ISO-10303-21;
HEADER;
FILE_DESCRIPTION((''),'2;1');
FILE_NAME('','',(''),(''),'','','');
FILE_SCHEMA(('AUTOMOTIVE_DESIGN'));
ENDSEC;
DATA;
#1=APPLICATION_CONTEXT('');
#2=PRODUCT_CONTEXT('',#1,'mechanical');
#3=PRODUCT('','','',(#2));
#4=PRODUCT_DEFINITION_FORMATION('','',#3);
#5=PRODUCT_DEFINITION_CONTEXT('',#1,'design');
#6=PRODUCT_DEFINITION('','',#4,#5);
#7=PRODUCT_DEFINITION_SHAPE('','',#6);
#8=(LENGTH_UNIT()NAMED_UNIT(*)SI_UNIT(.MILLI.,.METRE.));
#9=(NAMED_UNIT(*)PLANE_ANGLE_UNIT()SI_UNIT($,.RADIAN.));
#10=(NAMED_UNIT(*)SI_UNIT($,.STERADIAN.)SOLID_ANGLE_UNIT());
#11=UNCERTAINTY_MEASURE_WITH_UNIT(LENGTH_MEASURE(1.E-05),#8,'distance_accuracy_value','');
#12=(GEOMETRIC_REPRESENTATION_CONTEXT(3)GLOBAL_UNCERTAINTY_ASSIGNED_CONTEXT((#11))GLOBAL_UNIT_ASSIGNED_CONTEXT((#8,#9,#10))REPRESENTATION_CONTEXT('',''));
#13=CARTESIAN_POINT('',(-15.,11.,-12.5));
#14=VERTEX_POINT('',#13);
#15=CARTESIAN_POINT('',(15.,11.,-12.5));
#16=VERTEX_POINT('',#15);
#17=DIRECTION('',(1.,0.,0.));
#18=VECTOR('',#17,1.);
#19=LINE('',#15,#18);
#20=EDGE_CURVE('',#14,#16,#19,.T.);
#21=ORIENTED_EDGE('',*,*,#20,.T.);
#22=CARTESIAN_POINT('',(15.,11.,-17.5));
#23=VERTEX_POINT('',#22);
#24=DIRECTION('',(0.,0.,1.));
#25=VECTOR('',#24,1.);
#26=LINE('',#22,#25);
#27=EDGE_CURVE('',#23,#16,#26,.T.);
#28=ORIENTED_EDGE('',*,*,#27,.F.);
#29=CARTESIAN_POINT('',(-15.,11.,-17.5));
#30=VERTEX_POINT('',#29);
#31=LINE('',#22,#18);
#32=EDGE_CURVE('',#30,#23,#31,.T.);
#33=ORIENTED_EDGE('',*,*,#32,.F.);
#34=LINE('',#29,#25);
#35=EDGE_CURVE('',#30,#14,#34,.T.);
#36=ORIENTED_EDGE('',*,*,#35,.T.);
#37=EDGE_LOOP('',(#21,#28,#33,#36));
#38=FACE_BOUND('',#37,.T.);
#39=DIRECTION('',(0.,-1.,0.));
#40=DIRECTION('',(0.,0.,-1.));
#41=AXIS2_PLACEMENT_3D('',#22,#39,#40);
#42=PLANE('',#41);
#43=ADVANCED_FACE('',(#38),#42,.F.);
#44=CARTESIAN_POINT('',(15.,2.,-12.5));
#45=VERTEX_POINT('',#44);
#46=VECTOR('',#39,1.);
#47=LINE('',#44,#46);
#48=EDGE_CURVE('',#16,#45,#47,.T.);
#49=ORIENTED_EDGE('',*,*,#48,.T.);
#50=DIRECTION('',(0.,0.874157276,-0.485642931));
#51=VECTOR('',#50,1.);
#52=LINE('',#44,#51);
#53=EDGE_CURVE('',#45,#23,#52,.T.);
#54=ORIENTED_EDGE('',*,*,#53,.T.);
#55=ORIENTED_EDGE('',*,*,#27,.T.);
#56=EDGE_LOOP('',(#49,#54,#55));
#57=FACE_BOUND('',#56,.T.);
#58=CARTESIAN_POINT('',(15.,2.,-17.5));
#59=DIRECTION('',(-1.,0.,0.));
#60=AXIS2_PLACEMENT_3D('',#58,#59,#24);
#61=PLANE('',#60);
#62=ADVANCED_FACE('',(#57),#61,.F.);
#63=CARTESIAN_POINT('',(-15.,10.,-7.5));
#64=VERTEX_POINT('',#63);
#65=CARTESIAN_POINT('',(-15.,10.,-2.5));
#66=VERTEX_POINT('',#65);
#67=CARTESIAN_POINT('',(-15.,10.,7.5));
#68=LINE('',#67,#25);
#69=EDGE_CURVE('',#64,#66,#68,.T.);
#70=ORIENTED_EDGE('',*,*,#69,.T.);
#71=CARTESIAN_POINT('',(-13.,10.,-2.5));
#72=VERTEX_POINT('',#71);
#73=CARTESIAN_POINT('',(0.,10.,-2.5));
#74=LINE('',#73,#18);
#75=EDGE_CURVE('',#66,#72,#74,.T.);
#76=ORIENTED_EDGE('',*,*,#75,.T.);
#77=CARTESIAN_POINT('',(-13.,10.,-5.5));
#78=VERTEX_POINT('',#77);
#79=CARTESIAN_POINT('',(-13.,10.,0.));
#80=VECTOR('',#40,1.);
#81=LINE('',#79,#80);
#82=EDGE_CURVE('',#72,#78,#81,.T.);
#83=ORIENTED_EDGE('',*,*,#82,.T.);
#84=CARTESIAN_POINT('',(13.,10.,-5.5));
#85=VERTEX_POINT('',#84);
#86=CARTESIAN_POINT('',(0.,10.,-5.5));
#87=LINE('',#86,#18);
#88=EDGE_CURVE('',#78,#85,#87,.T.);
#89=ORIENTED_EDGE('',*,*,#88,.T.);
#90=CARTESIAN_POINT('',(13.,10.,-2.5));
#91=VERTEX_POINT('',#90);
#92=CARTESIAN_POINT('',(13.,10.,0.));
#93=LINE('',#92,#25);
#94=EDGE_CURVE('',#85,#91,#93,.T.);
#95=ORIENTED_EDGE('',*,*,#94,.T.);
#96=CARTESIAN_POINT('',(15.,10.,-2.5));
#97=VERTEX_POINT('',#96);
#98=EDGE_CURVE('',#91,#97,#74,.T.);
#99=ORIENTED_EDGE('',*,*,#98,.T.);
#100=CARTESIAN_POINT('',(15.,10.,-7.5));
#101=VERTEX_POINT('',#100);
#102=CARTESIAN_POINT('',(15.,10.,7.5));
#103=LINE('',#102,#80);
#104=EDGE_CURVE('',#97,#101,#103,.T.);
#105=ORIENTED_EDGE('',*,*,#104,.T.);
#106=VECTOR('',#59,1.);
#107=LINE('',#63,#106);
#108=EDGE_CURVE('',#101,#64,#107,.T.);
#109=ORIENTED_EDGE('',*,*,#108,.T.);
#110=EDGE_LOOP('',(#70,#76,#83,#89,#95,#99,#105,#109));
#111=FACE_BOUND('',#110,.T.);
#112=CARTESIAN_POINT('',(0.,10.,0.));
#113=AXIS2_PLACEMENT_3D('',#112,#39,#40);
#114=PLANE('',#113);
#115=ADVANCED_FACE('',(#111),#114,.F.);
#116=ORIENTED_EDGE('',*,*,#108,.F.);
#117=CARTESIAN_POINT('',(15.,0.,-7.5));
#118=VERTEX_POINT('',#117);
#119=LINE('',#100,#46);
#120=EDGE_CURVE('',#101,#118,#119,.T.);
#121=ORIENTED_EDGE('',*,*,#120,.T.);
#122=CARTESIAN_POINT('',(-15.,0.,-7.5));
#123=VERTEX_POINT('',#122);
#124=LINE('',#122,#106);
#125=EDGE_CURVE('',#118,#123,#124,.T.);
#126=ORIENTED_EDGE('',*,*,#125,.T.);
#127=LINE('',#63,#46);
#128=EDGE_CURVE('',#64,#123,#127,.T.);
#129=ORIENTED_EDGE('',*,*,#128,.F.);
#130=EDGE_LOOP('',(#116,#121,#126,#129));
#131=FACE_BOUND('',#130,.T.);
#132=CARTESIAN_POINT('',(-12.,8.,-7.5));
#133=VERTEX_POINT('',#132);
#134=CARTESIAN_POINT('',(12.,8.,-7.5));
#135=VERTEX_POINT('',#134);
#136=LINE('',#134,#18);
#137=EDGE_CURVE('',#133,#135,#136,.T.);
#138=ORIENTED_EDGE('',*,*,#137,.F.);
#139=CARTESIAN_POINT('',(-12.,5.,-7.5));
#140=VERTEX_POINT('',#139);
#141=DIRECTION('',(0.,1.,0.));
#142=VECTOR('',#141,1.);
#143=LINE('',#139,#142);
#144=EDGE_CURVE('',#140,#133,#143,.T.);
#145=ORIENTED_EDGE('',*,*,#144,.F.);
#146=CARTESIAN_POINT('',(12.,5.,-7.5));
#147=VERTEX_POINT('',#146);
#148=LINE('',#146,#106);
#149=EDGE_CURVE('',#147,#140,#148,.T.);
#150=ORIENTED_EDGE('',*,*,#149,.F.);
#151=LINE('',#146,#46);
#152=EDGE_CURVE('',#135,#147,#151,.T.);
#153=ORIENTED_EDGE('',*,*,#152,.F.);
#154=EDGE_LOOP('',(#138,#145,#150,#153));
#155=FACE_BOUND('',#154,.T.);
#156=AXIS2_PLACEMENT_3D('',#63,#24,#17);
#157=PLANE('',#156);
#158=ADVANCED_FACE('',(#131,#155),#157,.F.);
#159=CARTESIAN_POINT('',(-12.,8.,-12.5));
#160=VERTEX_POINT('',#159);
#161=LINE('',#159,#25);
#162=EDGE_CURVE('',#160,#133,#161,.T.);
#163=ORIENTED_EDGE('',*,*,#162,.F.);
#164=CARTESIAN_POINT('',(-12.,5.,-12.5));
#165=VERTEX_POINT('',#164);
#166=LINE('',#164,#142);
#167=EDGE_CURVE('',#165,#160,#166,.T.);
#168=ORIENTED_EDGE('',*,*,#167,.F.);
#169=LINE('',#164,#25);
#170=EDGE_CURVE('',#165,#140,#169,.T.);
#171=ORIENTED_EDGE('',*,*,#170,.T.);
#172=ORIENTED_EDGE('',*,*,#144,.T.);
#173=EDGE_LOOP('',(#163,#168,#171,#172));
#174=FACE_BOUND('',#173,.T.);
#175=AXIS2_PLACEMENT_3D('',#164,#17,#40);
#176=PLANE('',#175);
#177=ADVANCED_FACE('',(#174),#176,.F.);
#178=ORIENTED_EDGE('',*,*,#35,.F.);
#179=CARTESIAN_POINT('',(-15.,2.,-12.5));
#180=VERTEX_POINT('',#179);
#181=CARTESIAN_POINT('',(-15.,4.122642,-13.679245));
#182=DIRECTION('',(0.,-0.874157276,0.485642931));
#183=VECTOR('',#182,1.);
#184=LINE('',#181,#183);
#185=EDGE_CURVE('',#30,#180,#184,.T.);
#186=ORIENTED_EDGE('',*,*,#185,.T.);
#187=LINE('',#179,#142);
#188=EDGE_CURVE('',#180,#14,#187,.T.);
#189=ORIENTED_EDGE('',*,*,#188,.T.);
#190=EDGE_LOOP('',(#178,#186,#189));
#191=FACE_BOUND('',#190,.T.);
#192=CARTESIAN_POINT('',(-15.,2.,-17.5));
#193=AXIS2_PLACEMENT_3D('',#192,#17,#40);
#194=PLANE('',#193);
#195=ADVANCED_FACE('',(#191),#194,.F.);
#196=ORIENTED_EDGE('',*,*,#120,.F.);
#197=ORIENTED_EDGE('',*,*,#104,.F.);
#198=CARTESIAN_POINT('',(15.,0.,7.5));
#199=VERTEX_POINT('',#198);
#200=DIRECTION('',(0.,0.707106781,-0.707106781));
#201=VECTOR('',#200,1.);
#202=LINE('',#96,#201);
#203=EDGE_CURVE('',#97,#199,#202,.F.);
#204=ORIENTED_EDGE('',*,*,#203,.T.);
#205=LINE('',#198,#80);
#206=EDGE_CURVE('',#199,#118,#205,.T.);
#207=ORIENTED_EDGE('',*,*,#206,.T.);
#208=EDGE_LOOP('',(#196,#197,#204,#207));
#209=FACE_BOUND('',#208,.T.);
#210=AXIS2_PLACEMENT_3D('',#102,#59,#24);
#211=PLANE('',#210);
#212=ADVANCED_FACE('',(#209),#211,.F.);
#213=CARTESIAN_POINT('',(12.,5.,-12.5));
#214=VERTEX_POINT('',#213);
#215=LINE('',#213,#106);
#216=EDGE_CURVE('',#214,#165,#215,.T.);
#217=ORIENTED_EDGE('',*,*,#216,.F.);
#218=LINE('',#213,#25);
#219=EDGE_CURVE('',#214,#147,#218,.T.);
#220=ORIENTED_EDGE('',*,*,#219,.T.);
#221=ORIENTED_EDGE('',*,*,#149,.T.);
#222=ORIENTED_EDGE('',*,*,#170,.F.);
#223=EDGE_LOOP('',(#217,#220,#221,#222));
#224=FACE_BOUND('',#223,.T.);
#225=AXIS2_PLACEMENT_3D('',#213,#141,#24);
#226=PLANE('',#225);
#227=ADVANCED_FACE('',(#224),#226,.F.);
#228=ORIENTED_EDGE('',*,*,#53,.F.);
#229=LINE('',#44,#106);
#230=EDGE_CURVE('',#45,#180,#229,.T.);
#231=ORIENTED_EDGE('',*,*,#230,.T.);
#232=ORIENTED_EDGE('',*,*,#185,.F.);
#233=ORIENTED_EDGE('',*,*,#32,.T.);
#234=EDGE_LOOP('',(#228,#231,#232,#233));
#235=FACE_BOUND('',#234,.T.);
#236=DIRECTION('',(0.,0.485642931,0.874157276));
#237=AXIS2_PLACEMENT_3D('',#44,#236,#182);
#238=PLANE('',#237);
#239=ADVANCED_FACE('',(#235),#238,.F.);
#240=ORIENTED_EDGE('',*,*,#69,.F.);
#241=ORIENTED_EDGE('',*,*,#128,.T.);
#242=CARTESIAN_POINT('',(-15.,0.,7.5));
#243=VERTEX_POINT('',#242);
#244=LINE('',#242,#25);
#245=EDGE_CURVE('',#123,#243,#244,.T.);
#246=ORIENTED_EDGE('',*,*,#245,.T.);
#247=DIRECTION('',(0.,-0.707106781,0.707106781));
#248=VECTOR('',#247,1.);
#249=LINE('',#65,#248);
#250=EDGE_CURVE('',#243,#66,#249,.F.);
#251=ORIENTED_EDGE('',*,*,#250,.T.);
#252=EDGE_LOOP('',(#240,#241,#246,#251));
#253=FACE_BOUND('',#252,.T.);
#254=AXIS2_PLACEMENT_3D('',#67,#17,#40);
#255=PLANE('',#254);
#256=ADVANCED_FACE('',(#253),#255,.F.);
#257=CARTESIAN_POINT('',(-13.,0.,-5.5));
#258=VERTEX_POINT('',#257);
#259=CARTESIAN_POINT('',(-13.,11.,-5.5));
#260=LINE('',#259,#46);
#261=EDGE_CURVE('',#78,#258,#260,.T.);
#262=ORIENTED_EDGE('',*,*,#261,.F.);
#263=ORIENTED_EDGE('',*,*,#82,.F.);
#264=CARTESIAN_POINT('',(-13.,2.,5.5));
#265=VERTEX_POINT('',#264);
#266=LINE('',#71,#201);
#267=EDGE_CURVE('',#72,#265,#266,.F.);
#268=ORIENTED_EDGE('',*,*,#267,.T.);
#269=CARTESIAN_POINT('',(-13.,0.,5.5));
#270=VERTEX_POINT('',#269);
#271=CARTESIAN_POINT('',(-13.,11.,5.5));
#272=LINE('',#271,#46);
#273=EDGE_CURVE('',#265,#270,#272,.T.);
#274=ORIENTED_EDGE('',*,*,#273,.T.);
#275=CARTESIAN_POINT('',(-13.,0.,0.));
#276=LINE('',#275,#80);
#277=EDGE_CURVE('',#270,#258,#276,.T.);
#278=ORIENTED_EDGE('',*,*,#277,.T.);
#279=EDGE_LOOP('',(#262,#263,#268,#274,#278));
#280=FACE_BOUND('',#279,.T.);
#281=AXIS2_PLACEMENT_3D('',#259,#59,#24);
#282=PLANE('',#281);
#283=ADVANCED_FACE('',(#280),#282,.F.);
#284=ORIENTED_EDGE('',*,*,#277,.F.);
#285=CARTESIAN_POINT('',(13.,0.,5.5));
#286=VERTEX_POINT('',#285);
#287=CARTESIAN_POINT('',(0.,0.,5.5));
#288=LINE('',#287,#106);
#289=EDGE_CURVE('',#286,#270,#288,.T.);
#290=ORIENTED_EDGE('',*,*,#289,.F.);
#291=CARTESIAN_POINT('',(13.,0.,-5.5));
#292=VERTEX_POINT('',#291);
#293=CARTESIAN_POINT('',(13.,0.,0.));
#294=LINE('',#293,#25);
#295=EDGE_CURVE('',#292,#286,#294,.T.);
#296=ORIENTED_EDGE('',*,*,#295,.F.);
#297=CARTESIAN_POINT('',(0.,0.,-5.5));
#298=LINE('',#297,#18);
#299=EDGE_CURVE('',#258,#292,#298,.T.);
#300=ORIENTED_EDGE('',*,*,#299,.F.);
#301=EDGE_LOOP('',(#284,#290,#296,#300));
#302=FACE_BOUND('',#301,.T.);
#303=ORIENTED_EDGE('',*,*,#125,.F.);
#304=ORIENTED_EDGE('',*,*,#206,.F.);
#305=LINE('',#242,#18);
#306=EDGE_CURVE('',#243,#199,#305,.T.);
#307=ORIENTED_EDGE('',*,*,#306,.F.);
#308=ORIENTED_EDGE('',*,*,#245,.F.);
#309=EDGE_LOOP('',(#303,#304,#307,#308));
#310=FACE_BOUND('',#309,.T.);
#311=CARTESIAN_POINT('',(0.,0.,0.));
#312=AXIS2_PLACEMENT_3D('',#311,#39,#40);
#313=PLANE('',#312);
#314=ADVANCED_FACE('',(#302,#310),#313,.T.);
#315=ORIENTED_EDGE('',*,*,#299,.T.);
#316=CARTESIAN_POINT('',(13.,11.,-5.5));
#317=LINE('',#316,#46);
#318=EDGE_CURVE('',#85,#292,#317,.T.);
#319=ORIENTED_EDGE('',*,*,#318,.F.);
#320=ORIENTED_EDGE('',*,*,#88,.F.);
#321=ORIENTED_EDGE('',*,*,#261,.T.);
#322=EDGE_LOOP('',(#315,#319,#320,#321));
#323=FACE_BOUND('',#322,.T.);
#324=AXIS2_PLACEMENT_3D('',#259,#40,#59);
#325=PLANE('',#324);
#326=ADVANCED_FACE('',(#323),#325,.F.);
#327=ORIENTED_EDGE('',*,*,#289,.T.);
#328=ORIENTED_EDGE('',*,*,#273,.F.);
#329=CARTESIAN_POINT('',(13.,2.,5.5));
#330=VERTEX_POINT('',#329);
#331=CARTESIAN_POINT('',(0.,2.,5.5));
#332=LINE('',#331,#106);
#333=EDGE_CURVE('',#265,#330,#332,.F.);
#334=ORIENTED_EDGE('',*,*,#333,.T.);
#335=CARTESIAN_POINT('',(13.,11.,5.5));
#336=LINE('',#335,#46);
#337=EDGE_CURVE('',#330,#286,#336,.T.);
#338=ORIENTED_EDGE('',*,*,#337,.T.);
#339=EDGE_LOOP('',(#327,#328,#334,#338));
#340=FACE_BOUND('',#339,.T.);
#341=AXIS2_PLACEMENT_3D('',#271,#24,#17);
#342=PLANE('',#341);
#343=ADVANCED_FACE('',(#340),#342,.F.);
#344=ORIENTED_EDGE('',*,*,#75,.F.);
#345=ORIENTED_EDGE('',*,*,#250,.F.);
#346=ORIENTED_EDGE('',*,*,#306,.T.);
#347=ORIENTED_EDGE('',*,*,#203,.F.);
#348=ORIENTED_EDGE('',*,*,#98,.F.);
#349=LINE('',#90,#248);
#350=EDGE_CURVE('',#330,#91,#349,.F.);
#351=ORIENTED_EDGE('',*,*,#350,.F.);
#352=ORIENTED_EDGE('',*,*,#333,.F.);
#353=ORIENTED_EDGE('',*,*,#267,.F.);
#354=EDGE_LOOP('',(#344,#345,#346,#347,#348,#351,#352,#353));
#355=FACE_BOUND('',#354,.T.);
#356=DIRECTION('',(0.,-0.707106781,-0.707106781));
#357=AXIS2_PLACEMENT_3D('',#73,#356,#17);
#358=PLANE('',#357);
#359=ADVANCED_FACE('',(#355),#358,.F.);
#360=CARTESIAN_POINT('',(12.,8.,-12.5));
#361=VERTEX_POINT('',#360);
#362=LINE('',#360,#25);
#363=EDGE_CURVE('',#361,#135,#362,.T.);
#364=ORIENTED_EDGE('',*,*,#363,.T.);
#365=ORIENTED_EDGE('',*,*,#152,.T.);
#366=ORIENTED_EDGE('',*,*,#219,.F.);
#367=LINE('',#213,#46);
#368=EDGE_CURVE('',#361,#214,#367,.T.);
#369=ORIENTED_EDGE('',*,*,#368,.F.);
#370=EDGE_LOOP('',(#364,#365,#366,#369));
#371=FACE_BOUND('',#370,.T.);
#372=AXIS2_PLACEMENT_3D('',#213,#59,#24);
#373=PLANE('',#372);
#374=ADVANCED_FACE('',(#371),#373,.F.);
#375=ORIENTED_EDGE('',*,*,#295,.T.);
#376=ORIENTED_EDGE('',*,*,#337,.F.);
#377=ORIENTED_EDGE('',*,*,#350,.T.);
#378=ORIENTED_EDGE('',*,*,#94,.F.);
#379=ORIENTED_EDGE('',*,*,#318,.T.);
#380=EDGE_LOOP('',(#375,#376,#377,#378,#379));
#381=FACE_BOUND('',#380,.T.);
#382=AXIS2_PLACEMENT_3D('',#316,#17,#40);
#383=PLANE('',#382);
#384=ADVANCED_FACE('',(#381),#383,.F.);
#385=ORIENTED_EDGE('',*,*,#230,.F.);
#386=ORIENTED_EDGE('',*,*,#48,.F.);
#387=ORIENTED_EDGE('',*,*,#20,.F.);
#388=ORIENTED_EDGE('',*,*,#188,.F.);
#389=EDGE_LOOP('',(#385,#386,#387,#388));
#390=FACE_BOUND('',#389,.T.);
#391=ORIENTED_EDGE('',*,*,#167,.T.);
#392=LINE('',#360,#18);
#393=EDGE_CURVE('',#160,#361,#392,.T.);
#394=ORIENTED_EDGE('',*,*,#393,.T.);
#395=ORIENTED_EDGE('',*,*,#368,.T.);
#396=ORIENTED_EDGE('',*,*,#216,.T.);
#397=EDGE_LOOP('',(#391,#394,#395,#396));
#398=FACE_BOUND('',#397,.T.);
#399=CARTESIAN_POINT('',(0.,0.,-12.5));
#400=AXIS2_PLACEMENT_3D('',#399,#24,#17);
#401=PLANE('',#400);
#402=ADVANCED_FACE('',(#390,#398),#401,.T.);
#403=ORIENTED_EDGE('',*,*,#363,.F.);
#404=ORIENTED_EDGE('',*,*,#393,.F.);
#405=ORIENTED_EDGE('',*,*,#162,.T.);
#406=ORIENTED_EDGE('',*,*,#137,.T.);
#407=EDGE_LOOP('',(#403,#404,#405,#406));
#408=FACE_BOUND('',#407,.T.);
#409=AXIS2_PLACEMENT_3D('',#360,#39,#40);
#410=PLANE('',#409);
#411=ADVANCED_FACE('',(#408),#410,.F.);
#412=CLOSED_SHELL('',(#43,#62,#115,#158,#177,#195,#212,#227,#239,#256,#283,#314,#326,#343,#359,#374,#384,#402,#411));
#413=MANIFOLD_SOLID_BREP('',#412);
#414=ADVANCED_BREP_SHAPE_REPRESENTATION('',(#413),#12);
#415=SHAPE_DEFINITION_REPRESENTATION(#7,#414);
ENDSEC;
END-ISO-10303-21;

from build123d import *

# Parameters (mm, degrees)
SKETCH12_W               = 30
SKETCH12_H               = 15
BOSS_EXTRUDE4_DEPTH      = 10
CHAMFER1_SIZE            = 10
SKETCH14_W               = 24
SKETCH14_H               = 3
BOSS_EXTRUDE5_DEPTH      = 5
SKETCH15_W               = 30
SKETCH15_H               = 9
BOSS_EXTRUDE6_DEPTH      = 5
CUT_EXTRUDE10_DEPTH      = 37.431442464
CUT_EXTRUDE10_DEPTH_BACK = 37.431442464
CUT_EXTRUDE11_DEPTH      = 26.539185578
CUT_EXTRUDE11_DEPTH_BACK = 26.539185578
SKETCH18_W               = 26
SKETCH18_H               = 11


with BuildPart() as part:
    # Sketch12 → Boss-Extrude4 (new body)
    with BuildSketch(Plane(origin=(0, 0, 0), x_dir=(1, 0, 0), z_dir=(0, 1, 0))):
        Rectangle(SKETCH12_W, SKETCH12_H)
    extrude(amount=BOSS_EXTRUDE4_DEPTH)

    # Chamfer1
    chamfer1_edges = [part.edges().sort_by_distance(p)[0] for p in [
        (0, 10, 7.5),
    ]]
    chamfer(chamfer1_edges, length=CHAMFER1_SIZE - 0.0001)  # a hair under: the kernel refuses the full size

    # Sketch14 → Boss-Extrude5 (add)
    with BuildSketch(Plane(origin=(0, 0, -7.5), x_dir=(-1, 0, 0), z_dir=(0, 0, -1))):
        with Locations((0, 6.5)):
            Rectangle(SKETCH14_W, SKETCH14_H)
    extrude(amount=BOSS_EXTRUDE5_DEPTH)

    # Sketch15 → Boss-Extrude6 (add)
    with BuildSketch(Plane(origin=(0, 0, -12.5), x_dir=(-1, 0, 0), z_dir=(0, 0, -1))):
        with Locations((0, 6.5)):
            Rectangle(SKETCH15_W, SKETCH15_H)
    extrude(amount=BOSS_EXTRUDE6_DEPTH)

    # Sketch17 → Cut-Extrude10 (cut, two sides: drawn at the far end of the back side and taken through both)
    with BuildSketch(Plane.ZY.offset(15).offset(-CUT_EXTRUDE10_DEPTH_BACK)):
        Polygon((-12.5, 2), (-17.5, 11), (-17.5, 2), align=None)
    extrude(amount=CUT_EXTRUDE10_DEPTH + CUT_EXTRUDE10_DEPTH_BACK, mode=Mode.SUBTRACT)

    # Sketch18 → Cut-Extrude11 (cut, two sides: drawn at the far end of the back side and taken through both)
    with BuildSketch(Plane.XZ.offset(-CUT_EXTRUDE11_DEPTH_BACK)):
        Rectangle(SKETCH18_W, SKETCH18_H)
    extrude(amount=CUT_EXTRUDE11_DEPTH + CUT_EXTRUDE11_DEPTH_BACK, mode=Mode.SUBTRACT)


solid = part.part
